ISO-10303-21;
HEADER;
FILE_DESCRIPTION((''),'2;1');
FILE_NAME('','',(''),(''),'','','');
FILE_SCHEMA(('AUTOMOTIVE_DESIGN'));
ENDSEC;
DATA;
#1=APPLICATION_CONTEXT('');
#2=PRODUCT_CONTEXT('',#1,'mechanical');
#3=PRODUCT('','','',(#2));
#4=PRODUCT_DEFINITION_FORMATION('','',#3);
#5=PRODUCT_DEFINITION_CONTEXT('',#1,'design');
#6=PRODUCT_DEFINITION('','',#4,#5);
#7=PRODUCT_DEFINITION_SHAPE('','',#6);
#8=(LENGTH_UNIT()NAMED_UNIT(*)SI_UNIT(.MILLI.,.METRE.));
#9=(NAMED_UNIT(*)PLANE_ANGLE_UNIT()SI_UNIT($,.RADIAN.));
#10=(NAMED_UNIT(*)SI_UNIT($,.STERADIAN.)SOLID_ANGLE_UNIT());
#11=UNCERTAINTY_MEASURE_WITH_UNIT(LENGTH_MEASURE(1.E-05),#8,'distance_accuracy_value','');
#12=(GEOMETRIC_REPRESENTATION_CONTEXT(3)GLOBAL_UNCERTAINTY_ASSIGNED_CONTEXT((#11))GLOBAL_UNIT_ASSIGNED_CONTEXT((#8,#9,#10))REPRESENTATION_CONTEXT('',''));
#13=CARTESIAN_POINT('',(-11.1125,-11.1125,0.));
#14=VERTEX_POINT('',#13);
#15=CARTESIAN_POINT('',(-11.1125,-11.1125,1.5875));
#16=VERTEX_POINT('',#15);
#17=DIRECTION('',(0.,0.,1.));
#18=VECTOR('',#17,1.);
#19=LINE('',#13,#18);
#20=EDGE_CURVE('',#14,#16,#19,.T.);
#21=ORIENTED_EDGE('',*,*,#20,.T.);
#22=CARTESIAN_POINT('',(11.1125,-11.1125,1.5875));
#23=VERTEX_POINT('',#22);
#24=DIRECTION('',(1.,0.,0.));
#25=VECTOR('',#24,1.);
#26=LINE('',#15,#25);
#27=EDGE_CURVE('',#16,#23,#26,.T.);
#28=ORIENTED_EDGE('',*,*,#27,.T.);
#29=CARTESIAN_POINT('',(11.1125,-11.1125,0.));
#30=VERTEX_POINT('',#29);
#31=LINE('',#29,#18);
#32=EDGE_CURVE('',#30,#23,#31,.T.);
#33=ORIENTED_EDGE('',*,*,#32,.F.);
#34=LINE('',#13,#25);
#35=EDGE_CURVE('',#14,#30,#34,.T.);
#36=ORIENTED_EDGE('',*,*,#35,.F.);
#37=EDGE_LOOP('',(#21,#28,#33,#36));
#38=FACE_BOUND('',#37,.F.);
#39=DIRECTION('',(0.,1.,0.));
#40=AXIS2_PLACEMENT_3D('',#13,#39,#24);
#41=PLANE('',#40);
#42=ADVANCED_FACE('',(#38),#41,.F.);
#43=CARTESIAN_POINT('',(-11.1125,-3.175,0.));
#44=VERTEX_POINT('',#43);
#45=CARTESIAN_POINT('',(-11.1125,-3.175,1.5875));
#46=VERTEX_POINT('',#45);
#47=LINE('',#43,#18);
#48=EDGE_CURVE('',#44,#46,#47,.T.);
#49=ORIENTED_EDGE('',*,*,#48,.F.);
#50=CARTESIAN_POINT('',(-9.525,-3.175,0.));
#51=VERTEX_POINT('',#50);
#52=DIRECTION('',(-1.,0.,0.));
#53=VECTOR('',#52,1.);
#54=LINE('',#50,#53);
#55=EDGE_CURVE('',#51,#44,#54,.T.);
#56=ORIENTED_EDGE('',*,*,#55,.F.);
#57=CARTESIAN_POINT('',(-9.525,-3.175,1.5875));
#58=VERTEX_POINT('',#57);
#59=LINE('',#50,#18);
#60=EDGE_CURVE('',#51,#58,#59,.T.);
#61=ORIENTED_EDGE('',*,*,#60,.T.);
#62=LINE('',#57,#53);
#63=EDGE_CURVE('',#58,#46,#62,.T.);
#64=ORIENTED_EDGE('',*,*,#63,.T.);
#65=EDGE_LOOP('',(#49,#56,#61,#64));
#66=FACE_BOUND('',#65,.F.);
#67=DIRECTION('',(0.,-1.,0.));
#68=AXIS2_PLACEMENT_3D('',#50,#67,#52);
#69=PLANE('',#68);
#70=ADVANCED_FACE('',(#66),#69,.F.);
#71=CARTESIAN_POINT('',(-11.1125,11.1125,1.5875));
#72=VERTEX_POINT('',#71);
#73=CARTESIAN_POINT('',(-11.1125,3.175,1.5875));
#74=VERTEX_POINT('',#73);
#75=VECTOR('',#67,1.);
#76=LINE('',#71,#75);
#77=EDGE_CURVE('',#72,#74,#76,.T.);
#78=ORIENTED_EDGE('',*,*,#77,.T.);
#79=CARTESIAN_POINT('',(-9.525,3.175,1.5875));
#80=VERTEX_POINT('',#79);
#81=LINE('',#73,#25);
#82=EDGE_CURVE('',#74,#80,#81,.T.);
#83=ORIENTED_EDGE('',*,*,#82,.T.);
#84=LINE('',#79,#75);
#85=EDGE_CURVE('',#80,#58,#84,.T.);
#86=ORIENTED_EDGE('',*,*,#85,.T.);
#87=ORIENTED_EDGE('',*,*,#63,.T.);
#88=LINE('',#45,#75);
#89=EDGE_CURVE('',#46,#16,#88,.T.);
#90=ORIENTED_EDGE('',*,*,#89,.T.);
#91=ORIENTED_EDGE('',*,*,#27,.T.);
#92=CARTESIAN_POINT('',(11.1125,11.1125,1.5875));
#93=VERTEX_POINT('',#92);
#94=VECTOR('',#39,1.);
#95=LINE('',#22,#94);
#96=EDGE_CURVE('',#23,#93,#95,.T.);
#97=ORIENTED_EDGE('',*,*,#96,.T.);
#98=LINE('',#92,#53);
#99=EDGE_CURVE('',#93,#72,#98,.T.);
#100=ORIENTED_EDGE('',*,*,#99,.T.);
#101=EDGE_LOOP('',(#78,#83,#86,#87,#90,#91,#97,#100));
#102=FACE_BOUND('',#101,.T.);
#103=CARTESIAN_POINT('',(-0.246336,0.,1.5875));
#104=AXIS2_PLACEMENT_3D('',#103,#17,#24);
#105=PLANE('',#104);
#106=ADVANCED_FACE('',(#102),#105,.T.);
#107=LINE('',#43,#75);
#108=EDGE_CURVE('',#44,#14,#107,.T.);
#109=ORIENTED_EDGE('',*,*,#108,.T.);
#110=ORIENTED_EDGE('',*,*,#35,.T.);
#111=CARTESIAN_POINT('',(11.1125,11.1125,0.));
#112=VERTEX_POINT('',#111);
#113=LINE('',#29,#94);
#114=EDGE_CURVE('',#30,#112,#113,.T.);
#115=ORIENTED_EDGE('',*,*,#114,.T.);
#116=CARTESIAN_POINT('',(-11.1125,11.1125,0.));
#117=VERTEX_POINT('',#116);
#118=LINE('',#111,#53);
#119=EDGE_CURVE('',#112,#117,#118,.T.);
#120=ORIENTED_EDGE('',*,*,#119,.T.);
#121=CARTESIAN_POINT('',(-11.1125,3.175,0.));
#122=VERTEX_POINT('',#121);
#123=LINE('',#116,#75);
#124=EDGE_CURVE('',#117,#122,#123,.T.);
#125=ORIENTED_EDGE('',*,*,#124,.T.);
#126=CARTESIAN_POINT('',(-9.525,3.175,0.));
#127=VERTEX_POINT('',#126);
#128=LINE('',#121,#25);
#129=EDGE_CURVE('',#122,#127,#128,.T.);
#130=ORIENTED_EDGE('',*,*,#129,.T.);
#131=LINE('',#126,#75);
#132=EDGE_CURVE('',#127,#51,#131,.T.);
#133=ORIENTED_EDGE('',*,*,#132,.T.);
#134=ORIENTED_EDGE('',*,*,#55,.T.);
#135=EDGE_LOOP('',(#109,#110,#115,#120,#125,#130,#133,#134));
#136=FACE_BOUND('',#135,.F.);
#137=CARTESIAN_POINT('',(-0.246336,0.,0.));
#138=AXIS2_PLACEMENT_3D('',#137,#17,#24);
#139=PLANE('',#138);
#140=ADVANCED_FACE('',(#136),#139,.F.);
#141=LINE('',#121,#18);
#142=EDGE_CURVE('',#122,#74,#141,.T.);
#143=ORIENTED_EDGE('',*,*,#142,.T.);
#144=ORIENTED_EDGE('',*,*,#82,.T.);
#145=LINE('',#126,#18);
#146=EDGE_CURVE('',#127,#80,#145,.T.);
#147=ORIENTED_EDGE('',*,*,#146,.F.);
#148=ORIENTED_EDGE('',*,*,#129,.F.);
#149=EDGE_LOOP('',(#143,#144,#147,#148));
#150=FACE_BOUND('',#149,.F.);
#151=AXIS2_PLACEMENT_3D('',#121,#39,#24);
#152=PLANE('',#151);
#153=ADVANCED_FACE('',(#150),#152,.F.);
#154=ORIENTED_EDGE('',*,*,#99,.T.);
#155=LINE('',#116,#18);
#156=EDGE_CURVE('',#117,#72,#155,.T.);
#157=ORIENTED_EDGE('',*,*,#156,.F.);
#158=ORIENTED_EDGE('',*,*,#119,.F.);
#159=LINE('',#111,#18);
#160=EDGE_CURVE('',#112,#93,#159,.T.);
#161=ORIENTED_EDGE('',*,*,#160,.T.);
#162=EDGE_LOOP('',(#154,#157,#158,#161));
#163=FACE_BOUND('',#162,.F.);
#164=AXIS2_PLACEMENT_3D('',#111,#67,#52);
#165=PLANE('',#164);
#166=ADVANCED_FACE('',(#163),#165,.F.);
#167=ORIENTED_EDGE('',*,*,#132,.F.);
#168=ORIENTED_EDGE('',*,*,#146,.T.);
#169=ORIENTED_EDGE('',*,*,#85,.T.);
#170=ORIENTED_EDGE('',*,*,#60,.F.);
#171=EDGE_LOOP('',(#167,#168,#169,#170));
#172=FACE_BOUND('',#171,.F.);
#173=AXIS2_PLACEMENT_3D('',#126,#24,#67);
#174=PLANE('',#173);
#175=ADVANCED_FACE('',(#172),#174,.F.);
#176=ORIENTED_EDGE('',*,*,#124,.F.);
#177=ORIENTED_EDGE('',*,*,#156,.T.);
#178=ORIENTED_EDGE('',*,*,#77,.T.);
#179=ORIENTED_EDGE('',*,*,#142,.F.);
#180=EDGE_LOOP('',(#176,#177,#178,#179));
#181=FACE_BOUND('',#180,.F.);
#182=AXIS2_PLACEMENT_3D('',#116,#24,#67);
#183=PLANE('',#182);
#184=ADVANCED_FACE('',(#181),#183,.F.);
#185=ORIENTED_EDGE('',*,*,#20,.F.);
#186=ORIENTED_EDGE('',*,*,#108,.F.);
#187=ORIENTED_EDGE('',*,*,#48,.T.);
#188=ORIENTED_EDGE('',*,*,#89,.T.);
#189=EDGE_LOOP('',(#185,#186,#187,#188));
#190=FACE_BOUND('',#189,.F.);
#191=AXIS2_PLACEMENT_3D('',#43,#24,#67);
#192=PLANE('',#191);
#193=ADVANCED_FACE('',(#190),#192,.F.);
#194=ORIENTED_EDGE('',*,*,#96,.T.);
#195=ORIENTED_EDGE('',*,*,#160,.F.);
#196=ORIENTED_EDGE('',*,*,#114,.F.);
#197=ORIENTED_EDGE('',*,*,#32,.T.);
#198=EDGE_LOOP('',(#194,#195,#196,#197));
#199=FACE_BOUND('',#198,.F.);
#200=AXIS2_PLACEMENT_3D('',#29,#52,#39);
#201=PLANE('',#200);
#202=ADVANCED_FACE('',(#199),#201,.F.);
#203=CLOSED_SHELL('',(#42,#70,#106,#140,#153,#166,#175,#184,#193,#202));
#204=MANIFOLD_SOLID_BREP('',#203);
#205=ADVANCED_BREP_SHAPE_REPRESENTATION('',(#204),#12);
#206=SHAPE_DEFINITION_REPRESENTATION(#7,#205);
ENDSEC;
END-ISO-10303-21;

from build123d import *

# Parameters (mm, degrees)
F1_DEPTH = 1.5875


# Not quite as in the source:
# - a length typed as a fraction of an inch, garbled in the dataset ("3 / 203.2 mm" for 3/8 in), is restored


with BuildPart() as f1:
    # F0 (on Top) → F1 (new body)
    with BuildSketch(Plane.XY):
        Polygon((-11.1125, -3.175), (-11.1125, -11.1125), (11.1125, -11.1125), (11.1125, 11.1125), (-11.1125, 11.1125), (-11.1125, 3.175), (-9.525, 3.175), (-9.525, -3.175), align=None)
    extrude(amount=F1_DEPTH)


solid = f1.part
